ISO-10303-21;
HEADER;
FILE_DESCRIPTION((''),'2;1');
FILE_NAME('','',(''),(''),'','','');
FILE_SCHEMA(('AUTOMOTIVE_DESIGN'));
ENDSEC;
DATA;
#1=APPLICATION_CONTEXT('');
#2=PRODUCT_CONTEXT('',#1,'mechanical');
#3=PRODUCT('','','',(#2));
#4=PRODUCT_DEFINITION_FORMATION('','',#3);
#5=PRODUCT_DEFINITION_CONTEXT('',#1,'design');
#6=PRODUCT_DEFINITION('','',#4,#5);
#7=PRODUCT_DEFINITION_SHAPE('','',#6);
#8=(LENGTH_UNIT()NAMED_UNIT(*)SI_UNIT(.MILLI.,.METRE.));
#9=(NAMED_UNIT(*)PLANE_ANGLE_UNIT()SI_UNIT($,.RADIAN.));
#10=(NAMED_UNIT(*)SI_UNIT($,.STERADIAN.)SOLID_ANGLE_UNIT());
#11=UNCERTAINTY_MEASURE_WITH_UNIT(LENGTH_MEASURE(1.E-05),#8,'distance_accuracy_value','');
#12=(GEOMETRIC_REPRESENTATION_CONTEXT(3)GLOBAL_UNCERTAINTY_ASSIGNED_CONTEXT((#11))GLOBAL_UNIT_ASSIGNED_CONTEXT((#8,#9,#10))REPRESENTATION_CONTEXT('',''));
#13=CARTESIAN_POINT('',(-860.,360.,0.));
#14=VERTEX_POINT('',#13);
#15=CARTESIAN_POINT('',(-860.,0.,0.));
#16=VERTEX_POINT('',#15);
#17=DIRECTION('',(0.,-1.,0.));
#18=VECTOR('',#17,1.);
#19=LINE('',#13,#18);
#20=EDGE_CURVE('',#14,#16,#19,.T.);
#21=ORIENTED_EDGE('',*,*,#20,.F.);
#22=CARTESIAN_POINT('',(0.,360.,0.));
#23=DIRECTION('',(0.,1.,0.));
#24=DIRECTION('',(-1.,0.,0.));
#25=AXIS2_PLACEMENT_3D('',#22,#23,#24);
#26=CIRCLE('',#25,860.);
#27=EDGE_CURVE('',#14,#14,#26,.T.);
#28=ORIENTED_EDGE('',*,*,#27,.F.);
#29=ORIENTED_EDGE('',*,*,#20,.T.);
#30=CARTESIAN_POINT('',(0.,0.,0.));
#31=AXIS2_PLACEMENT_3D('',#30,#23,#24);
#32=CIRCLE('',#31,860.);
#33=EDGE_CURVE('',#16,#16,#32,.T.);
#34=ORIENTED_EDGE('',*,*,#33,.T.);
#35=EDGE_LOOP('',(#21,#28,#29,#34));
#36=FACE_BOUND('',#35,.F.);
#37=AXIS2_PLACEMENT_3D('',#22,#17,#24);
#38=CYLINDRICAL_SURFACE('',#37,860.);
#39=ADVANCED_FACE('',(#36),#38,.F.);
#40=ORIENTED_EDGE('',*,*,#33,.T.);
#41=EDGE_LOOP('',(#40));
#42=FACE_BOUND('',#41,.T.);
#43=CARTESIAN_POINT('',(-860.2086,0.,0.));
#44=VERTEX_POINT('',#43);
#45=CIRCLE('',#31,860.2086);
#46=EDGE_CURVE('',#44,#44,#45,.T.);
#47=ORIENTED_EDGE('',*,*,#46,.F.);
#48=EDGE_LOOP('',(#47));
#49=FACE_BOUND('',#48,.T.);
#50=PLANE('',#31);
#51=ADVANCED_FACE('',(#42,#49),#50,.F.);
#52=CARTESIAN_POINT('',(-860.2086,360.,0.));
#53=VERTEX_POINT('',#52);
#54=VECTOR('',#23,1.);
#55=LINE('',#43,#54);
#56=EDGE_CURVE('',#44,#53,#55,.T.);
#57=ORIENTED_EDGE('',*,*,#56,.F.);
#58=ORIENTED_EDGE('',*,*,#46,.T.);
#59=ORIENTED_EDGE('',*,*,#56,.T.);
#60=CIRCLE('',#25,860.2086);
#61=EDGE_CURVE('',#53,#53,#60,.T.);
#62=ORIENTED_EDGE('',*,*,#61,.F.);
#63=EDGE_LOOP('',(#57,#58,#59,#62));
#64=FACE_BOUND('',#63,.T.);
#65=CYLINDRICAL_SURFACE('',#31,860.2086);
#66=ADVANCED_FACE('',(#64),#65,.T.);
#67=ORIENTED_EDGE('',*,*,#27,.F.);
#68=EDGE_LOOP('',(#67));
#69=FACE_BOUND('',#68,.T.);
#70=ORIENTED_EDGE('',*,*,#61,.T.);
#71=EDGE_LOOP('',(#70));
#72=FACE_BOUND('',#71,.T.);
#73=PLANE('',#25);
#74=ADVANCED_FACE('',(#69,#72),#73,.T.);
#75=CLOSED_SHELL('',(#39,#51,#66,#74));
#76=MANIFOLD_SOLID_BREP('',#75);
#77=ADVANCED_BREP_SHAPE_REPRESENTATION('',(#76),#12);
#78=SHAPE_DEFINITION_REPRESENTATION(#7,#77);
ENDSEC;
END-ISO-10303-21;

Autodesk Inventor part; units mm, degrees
ref_plane "YZ Plane" through (0, 0, 0) normal (1, 0, 0) x (0, 1, 0)
ref_plane "XZ Plane" through (0, 0, 0) normal (0, 1, 0) x (-1, 0, 0)
ref_plane "XY Plane" through (0, 0, 0) normal (0, 0, 1) x (1, 0, 0)
sketch "Sketch1" plane through (0, 0, 0) normal (0, 0, 1) x (1, 0, 0)
  line L0 (-860, 0) -> (-860.2086, 0)
  line L1 (-860.2086, 0) -> (-860.2086, 360)
  line L2 (-860.2086, 360) -> (-860, 360)
  line L3 (-860, 360) -> (-860, 0)
  line L4 (0, -72) -> (0, 432) projected
  point P0 (0, 0)
  dimension "d0" = 360
  dimension "d1" = 860
revolve "Revolution1" add sketch "Sketch1" angle 360 about axis through (0, -10, 0) along (0, 1, 0)
properties part number "bpCylinder" material "Glass"
